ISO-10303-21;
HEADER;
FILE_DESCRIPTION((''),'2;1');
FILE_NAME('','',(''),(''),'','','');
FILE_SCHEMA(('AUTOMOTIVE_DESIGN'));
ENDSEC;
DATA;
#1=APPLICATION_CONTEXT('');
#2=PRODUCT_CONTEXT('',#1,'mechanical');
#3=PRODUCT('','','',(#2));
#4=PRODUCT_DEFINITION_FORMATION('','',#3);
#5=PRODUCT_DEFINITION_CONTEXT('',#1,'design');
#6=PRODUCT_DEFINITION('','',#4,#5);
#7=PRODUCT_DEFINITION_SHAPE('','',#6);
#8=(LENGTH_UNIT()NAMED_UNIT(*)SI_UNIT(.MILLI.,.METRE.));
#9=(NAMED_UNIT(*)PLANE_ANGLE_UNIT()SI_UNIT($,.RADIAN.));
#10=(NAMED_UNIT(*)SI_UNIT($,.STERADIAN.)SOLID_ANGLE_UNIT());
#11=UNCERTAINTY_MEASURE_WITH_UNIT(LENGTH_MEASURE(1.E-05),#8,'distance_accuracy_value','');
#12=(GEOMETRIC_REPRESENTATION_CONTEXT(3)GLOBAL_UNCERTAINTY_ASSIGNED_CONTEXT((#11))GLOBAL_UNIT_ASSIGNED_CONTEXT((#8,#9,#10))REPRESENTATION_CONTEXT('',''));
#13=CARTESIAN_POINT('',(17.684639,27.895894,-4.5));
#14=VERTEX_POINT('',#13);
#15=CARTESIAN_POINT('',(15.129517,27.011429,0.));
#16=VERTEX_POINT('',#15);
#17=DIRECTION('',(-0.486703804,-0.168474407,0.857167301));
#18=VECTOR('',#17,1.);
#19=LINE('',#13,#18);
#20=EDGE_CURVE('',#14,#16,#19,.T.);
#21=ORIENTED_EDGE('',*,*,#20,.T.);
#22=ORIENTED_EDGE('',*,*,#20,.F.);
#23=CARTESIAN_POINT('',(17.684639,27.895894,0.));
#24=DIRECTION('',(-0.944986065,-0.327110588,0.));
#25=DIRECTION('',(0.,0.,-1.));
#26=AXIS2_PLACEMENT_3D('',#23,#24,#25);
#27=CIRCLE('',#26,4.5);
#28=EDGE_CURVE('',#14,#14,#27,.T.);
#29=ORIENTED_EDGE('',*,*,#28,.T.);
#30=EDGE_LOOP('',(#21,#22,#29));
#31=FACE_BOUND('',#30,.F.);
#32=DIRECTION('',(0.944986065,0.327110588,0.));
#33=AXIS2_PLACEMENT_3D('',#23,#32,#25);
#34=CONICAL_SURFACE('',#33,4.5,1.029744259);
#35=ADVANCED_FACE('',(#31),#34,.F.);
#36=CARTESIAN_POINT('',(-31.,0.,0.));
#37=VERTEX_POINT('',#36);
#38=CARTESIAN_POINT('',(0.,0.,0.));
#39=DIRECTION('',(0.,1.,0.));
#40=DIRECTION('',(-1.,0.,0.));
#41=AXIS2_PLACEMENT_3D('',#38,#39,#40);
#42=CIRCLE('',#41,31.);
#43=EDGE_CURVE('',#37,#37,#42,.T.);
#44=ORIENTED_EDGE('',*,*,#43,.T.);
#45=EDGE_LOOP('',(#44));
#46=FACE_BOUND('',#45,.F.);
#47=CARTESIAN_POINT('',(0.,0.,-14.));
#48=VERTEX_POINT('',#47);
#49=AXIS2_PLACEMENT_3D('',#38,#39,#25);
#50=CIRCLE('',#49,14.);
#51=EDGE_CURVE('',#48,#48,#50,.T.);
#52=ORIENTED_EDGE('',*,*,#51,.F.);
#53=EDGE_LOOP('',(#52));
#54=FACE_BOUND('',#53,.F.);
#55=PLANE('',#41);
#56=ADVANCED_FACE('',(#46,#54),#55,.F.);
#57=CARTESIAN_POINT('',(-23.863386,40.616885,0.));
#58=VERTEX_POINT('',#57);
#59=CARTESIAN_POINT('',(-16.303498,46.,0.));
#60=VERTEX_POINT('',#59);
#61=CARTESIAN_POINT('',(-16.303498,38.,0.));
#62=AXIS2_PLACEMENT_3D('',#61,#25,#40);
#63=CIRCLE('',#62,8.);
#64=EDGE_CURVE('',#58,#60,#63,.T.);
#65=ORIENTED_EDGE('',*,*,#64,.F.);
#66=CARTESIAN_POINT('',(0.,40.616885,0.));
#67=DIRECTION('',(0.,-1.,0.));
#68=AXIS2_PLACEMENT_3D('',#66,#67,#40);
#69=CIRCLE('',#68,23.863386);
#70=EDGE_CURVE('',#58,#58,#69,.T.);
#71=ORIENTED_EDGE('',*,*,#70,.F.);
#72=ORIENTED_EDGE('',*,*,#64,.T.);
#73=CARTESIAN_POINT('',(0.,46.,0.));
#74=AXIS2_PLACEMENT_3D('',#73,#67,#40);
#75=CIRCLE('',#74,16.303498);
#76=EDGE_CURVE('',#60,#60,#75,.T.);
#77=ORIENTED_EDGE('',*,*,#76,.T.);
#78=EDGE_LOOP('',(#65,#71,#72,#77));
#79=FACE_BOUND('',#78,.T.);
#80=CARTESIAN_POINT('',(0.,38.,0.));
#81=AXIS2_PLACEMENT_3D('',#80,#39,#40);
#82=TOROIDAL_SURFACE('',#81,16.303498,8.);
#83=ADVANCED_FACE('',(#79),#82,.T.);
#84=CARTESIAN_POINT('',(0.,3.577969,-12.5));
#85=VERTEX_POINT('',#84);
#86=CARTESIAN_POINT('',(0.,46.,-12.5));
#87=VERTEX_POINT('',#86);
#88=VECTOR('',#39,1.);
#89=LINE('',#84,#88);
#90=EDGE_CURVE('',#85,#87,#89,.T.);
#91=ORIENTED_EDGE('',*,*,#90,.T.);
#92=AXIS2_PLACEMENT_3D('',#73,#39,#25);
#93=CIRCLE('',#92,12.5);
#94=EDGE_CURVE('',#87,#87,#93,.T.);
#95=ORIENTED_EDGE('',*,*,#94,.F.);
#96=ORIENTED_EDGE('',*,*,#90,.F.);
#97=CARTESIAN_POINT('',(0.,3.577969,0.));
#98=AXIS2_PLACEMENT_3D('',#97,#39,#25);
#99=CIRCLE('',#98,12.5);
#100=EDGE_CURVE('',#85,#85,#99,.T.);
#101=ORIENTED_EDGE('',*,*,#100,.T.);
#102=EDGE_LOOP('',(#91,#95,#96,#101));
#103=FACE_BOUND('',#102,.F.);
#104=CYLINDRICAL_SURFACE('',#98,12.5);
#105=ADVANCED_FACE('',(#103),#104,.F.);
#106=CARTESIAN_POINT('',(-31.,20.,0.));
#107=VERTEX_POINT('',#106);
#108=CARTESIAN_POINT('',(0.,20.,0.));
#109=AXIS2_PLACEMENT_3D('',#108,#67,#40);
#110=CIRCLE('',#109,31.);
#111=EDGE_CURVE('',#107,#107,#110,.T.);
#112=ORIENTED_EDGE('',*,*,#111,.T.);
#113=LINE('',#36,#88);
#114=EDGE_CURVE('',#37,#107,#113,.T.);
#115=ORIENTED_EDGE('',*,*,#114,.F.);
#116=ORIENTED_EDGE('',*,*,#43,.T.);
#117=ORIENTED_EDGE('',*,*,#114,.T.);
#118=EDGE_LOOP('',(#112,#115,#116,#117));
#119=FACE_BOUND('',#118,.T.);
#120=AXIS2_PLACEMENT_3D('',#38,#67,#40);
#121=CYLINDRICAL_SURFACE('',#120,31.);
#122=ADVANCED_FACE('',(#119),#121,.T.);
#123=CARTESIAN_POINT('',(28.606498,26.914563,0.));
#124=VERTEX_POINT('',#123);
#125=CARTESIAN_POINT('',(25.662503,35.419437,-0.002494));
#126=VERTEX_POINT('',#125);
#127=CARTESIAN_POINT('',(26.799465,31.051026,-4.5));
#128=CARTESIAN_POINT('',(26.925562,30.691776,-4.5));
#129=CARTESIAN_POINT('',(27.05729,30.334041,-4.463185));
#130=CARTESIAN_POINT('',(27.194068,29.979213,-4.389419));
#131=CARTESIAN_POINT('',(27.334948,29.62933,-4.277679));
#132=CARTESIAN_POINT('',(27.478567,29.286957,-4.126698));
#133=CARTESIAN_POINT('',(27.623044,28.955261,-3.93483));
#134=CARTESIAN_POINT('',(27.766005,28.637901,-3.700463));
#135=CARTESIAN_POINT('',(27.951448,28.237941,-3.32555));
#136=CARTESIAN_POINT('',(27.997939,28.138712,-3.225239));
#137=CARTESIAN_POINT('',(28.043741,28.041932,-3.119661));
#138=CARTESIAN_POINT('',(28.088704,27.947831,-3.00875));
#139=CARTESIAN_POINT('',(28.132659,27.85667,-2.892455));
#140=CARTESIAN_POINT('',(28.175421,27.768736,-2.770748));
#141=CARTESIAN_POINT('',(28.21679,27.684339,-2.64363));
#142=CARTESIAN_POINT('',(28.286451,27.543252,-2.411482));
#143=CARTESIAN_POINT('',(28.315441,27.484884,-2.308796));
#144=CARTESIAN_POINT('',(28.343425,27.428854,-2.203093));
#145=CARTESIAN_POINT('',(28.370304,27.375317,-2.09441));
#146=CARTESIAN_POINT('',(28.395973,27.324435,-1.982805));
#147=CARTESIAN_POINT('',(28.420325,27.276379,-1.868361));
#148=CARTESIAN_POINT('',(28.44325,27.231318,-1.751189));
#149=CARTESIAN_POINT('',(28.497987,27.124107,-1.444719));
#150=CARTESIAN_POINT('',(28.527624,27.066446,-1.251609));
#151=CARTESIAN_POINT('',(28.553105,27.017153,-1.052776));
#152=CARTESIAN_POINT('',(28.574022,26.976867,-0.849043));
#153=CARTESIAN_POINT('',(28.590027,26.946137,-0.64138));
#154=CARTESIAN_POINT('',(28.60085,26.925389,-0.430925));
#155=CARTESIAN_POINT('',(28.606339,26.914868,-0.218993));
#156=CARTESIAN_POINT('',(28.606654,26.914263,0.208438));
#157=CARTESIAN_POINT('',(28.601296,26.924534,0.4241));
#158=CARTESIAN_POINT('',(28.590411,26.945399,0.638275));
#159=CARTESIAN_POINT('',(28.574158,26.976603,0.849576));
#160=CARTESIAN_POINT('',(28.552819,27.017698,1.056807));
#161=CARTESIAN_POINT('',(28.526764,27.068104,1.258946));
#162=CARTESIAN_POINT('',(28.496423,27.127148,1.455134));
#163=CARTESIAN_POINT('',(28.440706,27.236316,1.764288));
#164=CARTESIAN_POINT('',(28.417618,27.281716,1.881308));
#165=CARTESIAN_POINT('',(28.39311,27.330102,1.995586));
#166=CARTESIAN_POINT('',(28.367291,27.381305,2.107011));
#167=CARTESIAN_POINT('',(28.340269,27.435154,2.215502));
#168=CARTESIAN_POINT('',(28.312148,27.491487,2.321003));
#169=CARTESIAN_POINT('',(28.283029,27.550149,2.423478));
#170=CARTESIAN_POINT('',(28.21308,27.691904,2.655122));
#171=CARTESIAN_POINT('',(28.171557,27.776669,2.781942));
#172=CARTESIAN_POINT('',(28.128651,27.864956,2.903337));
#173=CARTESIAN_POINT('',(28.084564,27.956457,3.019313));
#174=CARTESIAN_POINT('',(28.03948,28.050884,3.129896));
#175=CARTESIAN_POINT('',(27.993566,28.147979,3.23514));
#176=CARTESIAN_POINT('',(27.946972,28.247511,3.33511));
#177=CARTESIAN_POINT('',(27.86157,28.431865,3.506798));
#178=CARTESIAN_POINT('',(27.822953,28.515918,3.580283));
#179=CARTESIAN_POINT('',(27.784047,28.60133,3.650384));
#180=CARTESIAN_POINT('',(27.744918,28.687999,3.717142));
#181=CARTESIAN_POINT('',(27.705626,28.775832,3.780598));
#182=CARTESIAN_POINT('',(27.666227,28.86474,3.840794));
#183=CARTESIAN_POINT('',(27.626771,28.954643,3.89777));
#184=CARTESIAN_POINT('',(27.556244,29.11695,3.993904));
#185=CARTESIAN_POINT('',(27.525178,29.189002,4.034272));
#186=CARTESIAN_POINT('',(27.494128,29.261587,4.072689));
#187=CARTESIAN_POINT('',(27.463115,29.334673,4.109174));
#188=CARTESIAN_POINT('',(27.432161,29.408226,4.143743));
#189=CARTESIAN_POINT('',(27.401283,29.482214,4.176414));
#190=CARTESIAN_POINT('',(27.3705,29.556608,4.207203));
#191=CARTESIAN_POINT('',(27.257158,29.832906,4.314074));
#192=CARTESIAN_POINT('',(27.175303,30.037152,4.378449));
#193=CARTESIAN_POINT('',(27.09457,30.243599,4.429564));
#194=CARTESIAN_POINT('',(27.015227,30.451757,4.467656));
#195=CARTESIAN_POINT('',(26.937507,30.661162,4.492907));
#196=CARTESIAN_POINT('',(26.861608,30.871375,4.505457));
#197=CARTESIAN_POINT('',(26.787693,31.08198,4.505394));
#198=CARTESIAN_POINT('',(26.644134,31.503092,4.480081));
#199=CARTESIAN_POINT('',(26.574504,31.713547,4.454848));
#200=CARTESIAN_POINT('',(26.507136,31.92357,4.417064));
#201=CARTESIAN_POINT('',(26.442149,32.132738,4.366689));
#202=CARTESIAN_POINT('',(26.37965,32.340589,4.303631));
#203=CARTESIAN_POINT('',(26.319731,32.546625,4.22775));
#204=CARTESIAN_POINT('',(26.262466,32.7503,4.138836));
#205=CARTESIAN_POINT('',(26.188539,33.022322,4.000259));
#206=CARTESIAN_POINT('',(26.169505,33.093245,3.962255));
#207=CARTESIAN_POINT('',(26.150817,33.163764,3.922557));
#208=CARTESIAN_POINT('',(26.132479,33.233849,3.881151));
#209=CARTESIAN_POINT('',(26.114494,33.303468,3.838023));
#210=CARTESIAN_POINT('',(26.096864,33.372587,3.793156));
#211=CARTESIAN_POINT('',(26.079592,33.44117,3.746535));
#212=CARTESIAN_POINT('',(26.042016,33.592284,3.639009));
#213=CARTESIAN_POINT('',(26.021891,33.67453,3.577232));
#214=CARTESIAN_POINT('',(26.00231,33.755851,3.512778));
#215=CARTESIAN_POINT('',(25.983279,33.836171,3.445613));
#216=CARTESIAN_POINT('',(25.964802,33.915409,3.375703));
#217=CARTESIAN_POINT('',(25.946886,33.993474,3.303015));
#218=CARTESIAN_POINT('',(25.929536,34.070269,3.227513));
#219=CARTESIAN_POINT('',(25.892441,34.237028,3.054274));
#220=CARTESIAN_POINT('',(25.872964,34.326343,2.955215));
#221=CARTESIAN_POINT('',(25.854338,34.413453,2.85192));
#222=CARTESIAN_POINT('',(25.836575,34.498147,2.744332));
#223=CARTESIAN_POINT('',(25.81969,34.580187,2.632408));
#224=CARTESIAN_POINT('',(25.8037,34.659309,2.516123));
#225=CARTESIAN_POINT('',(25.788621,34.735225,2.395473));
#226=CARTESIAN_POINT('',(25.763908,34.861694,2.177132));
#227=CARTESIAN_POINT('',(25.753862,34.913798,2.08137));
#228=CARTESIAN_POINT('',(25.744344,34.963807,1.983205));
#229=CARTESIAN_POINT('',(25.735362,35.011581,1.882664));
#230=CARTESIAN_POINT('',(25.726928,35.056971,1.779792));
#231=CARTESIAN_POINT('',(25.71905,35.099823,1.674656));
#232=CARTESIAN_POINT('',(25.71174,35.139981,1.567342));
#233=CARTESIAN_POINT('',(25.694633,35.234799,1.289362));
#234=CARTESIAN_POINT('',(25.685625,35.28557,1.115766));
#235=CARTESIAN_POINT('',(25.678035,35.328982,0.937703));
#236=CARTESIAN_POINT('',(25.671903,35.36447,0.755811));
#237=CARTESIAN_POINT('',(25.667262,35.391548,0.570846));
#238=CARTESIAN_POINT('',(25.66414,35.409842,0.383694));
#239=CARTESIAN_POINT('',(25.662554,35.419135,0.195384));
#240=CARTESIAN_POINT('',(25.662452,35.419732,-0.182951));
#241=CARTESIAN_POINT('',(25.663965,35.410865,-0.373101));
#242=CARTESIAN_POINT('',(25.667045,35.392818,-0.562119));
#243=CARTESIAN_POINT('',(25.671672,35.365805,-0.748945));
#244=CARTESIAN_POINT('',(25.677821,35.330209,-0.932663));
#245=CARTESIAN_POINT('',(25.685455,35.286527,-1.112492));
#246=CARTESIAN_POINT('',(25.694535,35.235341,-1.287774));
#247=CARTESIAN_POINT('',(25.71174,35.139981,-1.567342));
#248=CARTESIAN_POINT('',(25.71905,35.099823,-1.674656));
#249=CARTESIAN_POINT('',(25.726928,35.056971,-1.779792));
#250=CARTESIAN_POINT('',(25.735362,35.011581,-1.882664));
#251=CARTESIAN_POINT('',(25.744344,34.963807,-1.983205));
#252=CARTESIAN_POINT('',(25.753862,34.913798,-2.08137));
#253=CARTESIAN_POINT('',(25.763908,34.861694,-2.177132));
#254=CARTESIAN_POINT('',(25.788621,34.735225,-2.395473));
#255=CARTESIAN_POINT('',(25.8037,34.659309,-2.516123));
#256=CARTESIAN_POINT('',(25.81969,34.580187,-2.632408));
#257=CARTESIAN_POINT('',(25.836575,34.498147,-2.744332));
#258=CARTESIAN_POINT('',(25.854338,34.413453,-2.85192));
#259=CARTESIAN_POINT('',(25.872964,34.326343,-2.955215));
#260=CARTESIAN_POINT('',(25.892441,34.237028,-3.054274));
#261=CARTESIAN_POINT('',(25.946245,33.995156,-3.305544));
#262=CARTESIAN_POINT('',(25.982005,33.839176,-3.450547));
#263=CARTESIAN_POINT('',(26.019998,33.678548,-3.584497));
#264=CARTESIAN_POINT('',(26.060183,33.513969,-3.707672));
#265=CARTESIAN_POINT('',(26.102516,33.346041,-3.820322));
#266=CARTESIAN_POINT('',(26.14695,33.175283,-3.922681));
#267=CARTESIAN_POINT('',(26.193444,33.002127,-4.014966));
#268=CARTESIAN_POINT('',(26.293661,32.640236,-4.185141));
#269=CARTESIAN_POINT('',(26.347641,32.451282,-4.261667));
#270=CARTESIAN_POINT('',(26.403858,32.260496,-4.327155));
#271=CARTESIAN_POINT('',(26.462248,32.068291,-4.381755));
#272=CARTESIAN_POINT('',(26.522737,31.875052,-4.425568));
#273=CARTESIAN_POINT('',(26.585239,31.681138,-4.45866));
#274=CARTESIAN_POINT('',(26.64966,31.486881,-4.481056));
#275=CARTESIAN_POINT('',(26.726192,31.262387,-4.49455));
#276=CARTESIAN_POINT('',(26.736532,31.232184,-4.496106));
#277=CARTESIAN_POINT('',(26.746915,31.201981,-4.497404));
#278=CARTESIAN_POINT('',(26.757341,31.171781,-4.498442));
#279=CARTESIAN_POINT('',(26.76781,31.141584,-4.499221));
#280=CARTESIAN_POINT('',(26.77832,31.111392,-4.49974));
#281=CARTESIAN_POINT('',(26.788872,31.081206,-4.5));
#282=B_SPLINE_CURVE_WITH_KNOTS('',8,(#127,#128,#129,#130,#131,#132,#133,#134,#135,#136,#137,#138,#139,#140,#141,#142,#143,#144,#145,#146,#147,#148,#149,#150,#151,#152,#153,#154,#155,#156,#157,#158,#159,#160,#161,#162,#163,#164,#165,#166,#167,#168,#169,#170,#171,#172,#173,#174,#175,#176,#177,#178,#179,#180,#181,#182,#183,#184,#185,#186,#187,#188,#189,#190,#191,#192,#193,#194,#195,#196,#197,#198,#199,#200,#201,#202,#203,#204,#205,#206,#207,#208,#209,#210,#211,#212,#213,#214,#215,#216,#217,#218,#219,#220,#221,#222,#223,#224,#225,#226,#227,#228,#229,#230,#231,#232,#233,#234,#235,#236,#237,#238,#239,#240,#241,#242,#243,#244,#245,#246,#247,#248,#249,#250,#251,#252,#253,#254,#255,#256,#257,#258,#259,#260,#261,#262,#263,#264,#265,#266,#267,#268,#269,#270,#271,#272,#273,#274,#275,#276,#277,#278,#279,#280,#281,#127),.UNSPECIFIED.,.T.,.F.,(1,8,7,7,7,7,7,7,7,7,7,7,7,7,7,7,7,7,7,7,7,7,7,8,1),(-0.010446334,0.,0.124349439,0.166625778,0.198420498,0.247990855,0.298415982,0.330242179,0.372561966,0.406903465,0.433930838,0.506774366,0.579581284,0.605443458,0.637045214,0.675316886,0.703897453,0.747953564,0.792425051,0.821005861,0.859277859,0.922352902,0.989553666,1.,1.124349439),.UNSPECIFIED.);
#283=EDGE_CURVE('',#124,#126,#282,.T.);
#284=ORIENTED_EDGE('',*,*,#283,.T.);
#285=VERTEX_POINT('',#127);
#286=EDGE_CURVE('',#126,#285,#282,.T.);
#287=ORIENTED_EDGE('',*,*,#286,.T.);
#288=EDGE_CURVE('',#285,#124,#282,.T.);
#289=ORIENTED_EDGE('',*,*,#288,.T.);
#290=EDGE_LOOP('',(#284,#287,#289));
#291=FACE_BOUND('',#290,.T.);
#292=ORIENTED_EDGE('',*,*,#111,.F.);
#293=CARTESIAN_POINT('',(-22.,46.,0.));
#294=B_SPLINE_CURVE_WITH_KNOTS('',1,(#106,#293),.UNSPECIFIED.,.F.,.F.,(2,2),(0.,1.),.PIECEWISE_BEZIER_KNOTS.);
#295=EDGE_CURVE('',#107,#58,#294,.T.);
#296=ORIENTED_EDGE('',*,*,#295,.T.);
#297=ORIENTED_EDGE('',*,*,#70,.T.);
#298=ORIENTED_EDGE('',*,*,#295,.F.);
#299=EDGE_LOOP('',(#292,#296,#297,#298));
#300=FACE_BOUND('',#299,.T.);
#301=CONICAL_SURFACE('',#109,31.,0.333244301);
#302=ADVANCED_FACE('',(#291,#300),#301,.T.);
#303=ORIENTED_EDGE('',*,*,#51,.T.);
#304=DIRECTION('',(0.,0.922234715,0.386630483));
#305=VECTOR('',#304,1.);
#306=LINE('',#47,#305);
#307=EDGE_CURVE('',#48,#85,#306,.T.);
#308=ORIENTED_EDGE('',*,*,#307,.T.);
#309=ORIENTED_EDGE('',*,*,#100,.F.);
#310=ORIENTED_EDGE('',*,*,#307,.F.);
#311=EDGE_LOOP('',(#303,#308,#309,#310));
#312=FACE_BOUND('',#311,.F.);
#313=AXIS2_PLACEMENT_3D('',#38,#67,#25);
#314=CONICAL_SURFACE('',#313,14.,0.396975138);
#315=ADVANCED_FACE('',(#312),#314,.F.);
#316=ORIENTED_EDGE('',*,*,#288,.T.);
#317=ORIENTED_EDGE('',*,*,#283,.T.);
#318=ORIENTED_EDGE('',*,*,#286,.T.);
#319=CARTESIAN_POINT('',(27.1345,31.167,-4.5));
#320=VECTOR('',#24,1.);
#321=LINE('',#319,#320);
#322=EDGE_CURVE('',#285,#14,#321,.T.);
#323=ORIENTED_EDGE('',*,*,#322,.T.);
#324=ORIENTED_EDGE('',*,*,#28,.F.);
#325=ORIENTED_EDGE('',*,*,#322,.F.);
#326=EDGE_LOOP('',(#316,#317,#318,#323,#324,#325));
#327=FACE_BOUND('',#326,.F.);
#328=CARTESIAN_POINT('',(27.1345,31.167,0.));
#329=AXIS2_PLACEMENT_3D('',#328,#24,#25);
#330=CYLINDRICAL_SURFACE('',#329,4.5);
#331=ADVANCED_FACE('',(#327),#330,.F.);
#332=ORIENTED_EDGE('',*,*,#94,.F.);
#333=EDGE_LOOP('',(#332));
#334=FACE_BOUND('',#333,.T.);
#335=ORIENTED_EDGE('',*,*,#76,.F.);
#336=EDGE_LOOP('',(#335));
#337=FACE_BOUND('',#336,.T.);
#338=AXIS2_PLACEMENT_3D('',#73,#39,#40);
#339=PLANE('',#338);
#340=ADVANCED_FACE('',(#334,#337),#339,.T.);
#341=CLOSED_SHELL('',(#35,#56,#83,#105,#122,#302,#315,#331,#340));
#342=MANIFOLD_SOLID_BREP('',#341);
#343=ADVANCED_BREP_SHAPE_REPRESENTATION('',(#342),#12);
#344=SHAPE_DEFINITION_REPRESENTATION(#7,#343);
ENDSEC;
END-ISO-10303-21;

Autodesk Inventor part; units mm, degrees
sketch "Sketch1" plane through (0, 0, 0) normal (0, 1, 0) x (-1, 0, 0)
  circle A0 centre (0, 0) radius 31
  dimension "d0" = 62
extrude "Extrusion1" add sketch "Sketch1" along normal blind 20
sketch "Sketch2" plane through (0, 20, 0) normal (0, 1, 0) x (1, 0, 0)
  line L0 (0, 0) -> (31.1009, 0)
  circle A0 centre (0, 0) radius 31 projected
ref_plane "Work Plane1" through (0, 46, 0) normal (0, 1, 0) x (-1, 0, 0)
ref_plane "Work Plane2" through (31, 0, 0) normal (1, 0, 0) x (0, 1, 0)
sketch "Sketch3" plane through (0, 46, 0) normal (0, 1, 0) x (-1, 0, 0)
  circle A0 centre (0, 0) radius 31 construction
  line L0 (0, 0) -> (-22, 0)
  circle A1 centre (0, 0) radius 22
  dimension "d5" = 22
loft "Loft1" add profiles "Sketch3" section 1 edges at (31, 20, 0)
fillet "Fillet1" radius 8 1 edges at (22, 46, 0)
sketch "Sketch5" plane through (31, 0, 0) normal (1, 0, 0) x (0, 1, 0)
  line L0 (40.6169, -23.8634) -> (40.6169, 23.8634) projected
  line L1 (20, -31) -> (20, 31) projected
  point P0 (0, 0)
ref_plane "Work Plane3" through (31, 20, -31) normal (-0.9449861, -0.3271106, 0) x (0.3271106, -0.9449861, 0)
sketch "Sketch6" plane through (31, 20, -31) normal (-0.9449861, -0.3271106, 0) x (0.3271106, -0.9449861, 0)
  ellipse E0 centre (-29.6231, 31) end of major axis (-29.6231, 54.8634) minor radius 7.806 construction
  line L0 (34.5454, 31) -> (-68.4133, 31) construction
  point P0 (8.7593, 31)
  point P1 (-11.8171, 31)
  point P2 (-21.8171, 31)
  dimension "d11" = 10
hole "Hole1" at (27.1345, 31.167, 0) direction (-0.9449861, -0.3271106, 0) diameter 9 depth 10 tip angle 118
thread "Thread1" size "M10x1" class "6H" standard "ANSI Metric M Profile" length 56
sketch "Sketch7" plane through (0, 46, 0) normal (0, 1, 0) x (1, 0, 0)
  circle A0 centre (0, 0) radius 12.5
  dimension "d21" = 25
sketch "Sketch8" plane through (0, 0, 0) normal (0, -1, 0) x (1, 0, 0)
  circle A0 centre (0, 0) radius 12.5
  dimension "d22" = 25
hole "Hole2" at (0, 0, 0) direction (0, 1, 0) diameter 25 end through all countersink diameter 28 countersink angle 45.49
thread "Thread2" size "M25x1.5" class "6H" standard "ANSI Metric M Profile" length 56
properties part number "ClampingNut" material "Polycarbonate, Clear"
